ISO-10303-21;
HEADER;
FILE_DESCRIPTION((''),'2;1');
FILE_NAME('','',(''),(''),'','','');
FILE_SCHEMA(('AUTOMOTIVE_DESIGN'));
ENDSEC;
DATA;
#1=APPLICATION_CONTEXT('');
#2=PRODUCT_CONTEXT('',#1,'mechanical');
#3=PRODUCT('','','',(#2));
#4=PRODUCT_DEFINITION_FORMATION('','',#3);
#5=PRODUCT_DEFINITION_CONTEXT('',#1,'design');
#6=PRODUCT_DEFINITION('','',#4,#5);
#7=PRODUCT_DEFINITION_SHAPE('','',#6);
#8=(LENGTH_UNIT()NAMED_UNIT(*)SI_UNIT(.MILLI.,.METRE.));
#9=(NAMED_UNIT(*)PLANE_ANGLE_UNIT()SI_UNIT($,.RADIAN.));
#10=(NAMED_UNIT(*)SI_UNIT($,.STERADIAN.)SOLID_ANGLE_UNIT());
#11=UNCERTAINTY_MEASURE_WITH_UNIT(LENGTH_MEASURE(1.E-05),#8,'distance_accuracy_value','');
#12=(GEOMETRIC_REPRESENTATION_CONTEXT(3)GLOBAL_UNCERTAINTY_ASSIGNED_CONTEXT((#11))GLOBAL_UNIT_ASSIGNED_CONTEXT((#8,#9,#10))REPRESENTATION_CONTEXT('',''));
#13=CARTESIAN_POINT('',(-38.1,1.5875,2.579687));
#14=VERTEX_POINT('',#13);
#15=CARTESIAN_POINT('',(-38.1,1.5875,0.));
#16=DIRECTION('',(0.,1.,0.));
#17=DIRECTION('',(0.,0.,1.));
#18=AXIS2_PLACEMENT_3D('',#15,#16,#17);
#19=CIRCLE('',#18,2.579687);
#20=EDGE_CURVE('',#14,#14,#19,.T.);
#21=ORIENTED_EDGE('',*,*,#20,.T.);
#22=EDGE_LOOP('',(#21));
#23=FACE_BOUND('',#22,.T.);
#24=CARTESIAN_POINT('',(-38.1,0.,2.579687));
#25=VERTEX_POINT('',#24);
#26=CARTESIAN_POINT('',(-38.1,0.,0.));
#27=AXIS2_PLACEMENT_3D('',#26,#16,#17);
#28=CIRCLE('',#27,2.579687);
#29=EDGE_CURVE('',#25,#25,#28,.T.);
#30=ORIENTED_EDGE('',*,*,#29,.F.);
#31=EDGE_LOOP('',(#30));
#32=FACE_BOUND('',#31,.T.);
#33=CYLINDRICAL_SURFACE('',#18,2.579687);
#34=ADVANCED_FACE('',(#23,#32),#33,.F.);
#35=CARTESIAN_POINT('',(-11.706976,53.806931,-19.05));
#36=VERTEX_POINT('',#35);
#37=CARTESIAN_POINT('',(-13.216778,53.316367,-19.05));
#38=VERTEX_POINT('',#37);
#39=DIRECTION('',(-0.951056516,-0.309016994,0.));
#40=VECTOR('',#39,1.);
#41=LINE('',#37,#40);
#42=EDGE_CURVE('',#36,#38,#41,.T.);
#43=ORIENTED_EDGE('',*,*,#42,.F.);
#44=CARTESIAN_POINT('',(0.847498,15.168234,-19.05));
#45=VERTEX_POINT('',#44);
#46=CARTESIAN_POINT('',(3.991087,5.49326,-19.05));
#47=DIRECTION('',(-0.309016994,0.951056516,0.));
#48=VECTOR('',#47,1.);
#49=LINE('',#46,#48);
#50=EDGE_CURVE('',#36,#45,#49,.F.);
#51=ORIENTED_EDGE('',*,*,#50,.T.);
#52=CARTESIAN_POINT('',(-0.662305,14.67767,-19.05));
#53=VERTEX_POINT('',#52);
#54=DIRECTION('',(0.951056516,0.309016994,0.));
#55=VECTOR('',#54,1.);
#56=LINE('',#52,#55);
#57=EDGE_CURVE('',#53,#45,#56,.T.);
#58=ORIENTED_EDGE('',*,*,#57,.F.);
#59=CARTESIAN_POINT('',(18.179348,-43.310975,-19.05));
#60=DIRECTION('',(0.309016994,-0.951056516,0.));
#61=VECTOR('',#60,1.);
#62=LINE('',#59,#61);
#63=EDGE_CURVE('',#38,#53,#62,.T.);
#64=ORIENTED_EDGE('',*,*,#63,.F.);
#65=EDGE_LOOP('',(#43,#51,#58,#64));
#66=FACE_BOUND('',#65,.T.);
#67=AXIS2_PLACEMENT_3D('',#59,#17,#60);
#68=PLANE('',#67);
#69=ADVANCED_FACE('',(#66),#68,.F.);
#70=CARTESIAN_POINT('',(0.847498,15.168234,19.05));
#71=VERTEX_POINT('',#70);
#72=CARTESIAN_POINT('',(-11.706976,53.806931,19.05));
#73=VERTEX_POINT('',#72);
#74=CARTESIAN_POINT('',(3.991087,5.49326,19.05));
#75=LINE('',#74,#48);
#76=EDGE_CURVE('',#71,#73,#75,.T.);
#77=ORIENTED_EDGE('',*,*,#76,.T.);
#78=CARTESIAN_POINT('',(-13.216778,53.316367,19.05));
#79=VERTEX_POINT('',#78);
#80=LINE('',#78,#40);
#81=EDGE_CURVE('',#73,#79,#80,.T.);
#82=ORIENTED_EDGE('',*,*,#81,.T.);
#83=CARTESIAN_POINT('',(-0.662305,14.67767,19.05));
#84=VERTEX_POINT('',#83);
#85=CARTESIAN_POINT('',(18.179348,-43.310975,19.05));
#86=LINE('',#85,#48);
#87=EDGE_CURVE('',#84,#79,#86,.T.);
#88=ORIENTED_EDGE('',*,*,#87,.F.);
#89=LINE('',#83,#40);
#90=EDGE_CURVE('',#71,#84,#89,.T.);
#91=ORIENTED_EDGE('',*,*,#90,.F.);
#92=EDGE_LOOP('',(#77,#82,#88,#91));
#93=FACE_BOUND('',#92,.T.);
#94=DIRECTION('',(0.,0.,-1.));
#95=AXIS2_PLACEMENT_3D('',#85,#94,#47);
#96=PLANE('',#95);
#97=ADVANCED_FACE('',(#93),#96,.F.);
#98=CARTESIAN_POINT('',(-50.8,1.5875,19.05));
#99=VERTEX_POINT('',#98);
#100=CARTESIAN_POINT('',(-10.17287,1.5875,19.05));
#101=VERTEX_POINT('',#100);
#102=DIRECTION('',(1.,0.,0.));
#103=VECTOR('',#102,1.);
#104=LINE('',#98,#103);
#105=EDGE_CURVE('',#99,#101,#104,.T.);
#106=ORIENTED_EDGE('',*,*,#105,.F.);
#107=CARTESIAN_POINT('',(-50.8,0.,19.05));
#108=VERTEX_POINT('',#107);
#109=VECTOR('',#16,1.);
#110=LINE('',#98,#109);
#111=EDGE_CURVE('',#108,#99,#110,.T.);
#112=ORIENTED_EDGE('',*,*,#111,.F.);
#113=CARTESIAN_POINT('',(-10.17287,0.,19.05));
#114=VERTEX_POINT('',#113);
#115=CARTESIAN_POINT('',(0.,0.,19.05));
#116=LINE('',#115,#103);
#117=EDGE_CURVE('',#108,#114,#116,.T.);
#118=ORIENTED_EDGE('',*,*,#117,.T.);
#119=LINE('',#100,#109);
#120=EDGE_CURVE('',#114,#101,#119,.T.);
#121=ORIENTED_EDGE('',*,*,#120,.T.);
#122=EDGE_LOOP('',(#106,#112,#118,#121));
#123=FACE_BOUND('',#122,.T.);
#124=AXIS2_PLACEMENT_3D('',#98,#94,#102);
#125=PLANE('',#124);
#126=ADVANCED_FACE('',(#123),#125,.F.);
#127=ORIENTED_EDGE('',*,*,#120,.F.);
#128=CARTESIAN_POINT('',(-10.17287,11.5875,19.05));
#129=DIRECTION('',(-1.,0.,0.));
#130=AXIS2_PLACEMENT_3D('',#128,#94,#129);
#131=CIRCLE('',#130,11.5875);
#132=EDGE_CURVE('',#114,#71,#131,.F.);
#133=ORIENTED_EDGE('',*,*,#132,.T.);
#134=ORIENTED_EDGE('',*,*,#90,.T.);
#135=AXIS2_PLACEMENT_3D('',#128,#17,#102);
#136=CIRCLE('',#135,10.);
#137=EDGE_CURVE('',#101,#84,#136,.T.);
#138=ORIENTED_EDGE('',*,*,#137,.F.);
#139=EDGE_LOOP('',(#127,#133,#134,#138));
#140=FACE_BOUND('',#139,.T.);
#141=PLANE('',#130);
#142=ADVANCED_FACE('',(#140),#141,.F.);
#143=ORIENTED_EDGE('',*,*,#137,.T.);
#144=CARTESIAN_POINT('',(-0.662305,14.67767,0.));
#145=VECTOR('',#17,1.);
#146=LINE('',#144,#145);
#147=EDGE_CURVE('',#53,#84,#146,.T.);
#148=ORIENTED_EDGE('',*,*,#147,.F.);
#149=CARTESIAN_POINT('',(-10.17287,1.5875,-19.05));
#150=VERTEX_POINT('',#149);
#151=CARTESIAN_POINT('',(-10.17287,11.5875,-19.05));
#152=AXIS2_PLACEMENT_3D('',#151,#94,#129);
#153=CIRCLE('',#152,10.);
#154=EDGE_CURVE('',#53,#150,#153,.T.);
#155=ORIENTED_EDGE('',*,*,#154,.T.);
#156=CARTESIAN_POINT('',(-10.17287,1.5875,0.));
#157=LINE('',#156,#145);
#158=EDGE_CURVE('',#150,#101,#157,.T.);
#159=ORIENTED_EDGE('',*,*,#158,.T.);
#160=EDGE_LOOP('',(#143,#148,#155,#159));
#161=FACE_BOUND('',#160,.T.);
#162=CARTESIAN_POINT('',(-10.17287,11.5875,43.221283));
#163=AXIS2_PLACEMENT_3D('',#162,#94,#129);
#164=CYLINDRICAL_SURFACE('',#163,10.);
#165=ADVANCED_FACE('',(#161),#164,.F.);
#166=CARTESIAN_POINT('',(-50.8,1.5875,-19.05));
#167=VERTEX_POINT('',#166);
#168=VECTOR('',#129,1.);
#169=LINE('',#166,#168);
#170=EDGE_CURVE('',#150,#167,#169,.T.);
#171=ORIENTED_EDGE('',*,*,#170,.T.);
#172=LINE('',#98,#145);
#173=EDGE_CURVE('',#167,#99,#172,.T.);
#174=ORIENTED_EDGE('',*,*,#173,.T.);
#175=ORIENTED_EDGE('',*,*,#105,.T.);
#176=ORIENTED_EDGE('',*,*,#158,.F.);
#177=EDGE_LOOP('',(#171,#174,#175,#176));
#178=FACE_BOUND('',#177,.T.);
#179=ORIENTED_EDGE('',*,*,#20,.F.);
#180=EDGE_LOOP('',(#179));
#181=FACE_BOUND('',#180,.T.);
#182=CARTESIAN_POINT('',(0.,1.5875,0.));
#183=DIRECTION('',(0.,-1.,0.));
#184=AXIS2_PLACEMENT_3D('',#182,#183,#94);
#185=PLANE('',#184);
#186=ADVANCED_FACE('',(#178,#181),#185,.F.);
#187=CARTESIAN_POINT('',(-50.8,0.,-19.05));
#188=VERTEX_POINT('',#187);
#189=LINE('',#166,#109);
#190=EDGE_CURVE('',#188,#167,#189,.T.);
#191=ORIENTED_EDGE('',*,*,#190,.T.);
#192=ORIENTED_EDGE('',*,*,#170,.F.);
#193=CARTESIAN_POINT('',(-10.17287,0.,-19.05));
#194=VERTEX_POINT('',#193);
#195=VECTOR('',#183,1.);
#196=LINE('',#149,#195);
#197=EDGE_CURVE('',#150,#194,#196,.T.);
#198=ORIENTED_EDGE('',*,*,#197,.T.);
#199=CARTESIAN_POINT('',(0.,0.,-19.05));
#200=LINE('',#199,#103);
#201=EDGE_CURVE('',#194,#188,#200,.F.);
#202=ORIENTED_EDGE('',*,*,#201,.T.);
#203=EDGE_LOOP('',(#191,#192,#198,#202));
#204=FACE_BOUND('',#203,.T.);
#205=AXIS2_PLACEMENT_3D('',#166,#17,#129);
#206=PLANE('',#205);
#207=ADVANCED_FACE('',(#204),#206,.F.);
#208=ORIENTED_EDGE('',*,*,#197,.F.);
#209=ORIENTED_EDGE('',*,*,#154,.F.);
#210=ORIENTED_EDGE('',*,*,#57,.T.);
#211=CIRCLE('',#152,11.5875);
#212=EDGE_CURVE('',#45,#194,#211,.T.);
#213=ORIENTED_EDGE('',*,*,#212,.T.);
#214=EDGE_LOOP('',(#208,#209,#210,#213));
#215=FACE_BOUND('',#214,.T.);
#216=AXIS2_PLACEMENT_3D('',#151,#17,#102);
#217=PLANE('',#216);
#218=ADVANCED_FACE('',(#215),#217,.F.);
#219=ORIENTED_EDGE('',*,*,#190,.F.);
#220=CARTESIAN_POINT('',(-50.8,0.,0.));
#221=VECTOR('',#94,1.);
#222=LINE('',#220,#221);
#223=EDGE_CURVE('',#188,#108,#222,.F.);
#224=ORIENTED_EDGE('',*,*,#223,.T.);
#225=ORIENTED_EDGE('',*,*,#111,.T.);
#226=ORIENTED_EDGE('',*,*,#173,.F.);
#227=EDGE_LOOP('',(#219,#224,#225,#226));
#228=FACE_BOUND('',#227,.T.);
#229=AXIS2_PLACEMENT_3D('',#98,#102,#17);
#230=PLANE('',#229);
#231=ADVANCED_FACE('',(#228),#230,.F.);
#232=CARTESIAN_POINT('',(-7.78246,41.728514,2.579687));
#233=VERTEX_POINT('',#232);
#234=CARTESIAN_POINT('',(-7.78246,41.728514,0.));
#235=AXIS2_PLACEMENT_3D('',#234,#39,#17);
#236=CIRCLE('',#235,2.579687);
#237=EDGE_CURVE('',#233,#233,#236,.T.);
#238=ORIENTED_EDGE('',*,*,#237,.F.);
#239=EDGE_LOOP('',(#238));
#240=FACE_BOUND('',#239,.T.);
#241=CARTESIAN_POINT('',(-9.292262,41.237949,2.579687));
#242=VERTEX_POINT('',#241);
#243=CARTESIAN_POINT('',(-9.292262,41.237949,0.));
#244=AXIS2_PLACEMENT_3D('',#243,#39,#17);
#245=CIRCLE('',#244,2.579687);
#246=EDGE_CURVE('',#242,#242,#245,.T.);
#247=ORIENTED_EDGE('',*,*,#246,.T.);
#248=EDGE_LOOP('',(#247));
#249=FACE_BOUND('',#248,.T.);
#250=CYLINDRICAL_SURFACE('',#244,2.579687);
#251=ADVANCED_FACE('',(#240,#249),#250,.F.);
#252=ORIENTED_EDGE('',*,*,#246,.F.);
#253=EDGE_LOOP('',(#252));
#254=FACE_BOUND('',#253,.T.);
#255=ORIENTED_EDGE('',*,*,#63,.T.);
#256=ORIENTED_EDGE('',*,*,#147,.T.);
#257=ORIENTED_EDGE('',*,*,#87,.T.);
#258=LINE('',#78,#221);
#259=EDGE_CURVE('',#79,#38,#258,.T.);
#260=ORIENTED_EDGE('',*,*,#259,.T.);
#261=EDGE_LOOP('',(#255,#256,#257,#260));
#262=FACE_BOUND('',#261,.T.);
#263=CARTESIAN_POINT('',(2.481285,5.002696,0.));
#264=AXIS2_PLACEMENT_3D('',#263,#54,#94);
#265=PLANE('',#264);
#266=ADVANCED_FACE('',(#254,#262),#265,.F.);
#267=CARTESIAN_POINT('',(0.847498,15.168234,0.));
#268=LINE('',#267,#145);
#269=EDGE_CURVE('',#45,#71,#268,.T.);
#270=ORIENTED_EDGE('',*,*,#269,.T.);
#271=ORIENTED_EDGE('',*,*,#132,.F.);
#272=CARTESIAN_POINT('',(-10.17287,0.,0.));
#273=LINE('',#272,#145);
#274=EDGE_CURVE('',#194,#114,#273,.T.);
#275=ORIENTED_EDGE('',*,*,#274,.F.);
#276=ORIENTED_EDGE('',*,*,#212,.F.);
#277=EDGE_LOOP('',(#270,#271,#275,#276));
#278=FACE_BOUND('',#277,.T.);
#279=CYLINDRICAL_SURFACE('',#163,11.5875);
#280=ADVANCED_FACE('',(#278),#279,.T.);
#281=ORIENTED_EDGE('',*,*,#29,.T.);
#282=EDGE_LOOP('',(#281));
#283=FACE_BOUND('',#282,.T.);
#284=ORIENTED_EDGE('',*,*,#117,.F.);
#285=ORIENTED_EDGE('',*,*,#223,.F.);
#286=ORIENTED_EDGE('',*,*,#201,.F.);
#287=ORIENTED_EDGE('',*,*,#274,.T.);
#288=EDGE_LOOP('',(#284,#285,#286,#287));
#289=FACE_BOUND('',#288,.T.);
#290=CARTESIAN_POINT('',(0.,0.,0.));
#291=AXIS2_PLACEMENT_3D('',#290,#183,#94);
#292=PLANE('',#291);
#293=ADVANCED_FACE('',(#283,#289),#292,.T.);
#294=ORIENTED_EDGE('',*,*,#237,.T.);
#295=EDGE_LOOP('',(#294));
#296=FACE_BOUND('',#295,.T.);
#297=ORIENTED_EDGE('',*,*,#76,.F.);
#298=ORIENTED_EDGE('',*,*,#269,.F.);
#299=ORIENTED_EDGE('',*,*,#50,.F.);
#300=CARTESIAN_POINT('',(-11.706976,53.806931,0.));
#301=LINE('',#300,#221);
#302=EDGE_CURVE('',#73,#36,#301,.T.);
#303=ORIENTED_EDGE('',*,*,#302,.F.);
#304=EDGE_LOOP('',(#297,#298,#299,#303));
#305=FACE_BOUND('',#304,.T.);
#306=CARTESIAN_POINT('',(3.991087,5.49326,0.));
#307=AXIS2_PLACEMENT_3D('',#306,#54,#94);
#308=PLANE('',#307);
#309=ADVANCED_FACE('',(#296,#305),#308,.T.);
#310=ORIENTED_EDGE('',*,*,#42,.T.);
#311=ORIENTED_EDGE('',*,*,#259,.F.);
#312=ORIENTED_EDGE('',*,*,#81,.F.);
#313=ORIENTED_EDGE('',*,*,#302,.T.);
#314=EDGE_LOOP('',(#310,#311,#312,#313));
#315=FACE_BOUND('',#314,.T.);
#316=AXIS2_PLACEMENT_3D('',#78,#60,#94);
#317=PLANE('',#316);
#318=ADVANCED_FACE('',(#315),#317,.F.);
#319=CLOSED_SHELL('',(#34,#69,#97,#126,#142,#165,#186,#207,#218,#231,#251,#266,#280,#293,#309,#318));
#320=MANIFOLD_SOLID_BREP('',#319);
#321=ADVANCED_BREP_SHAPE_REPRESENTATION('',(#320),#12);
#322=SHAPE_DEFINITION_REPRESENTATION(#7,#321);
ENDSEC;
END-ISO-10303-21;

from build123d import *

# Parameters (mm, degrees)
SKETCH1_W                  = 101.6
SKETCH1_H                  = 38.1
SKETCH1_R                  = 2.5796875
BOSS_EXTRUDE1_DEPTH        = 1.5875
SKETCHED_START             = -19.05
SKETCHED_BEND1_DEPTH       = 38.1
SKETCHED_BEND1_2_DEPTH     = 16.4703124
SKETCHED_START_2           = 2.5796876
SKETCHED_BEND1_3_DEPTH     = 16.4703124
SKETCHED_START_3           = -2.5796876
SKETCHED_BEND1_4_DEPTH     = 5.1593752
SKETCHED_START_4           = 3.905760394
SKETCHED_BEND1_5_OUTLINE_R = 2.5796875
SKETCHED_BEND1_5_DEPTH     = 1.5875


with BuildPart() as part:
    # Sketch1 → Boss-Extrude1 (new body)
    with BuildSketch(Plane(origin=(0, 0, 0), x_dir=(1, 0, 0), z_dir=(0, 1, 0))):
        Rectangle(SKETCH1_W, SKETCH1_H)
        with Locations(Location((-38.1, 0, 0), (0, 0, 270))):
            Circle(SKETCH1_R, mode=Mode.SUBTRACT)
        with Locations(Location((38.1, 0, 0), (0, 0, 270))):
            Circle(SKETCH1_R, mode=Mode.SUBTRACT)
    extrude(amount=BOSS_EXTRUDE1_DEPTH)

    # Sketched Bend1: read off the stored shape, not the designer's step
    # Sketched Bend1 outline → Sketched Bend1 (cut)
    with BuildSketch(Plane.XY.offset(SKETCHED_START)):
        with BuildLine():
            Line((50.8, 1.5875), (-4.318797944, 1.5875))
            ThreePointArc((-4.318797944, 1.5875), (-7.140118794, 0.403914791), (-10.172869711, 0))
            Line((-10.172869711, 0), (50.8, 0))
            Line((50.8, 0), (50.8, 1.5875))
        make_face()
    extrude(amount=SKETCHED_BEND1_DEPTH, mode=Mode.SUBTRACT)

    # Sketched Bend1 2 outline → Sketched Bend1 2 (add)
    with BuildSketch(Plane.XY.offset(SKETCHED_START)):
        with BuildLine():
            Line((-13.21677824, 53.316366943), (-0.662304548, 14.677669944))
            ThreePointArc((-0.662304548, 14.677669944), (-2.082699768, 5.709647478), (-10.172869711, 1.5875))
            Line((-10.172869711, 1.5875), (-4.318797944, 1.5875))
            ThreePointArc((-4.318797944, 1.5875), (0.657447044, 7.467500578), (0.847497671, 15.168234422))
            Line((0.847497671, 15.168234422), (-11.706976021, 53.806931422))
            Line((-11.706976021, 53.806931422), (-13.21677824, 53.316366943))
        make_face()
    extrude(amount=SKETCHED_BEND1_2_DEPTH)

    # Sketched Bend1 3 outline → Sketched Bend1 3 (add)
    with BuildSketch(Plane.XY.offset(SKETCHED_START_2)):
        with BuildLine():
            Line((-13.21677824, 53.316366943), (-0.662304548, 14.677669944))
            ThreePointArc((-0.662304548, 14.677669944), (-2.082699768, 5.709647478), (-10.172869711, 1.5875))
            Line((-10.172869711, 1.5875), (-4.318797944, 1.5875))
            ThreePointArc((-4.318797944, 1.5875), (0.657447044, 7.467500578), (0.847497671, 15.168234422))
            Line((0.847497671, 15.168234422), (-11.706976021, 53.806931422))
            Line((-11.706976021, 53.806931422), (-13.21677824, 53.316366943))
        make_face()
    extrude(amount=SKETCHED_BEND1_3_DEPTH)

    # Sketched Bend1 4 outline → Sketched Bend1 4 (add)
    with BuildSketch(Plane.XY.offset(SKETCHED_START_3)):
        with BuildLine():
            Line((-13.21677824, 53.316366943), (-0.662304548, 14.677669944))
            ThreePointArc((-0.662304548, 14.677669944), (-2.082699768, 5.709647478), (-10.172869711, 1.5875))
            Line((-10.172869711, 1.5875), (-4.318797944, 1.5875))
            ThreePointArc((-4.318797944, 1.5875), (0.657447044, 7.467500578), (0.847497671, 15.168234422))
            Line((0.847497671, 15.168234422), (-11.706976021, 53.806931422))
            Line((-11.706976021, 53.806931422), (-13.21677824, 53.316366943))
        make_face()
    extrude(amount=SKETCHED_BEND1_4_DEPTH)

    # Sketched Bend1 5 outline → Sketched Bend1 5 (cut)
    with BuildSketch(Plane(origin=(0, 0, 0), x_dir=(-0.30901699437495117, 0.9510565162951524, 0), z_dir=(0.9510565162951524, 0.3090169943749511, 0)).offset(SKETCHED_START_4)):
        with Locations((42.091087294, 0)):
            Circle(SKETCHED_BEND1_5_OUTLINE_R)
    extrude(amount=SKETCHED_BEND1_5_DEPTH, mode=Mode.SUBTRACT)


solid = part.part
